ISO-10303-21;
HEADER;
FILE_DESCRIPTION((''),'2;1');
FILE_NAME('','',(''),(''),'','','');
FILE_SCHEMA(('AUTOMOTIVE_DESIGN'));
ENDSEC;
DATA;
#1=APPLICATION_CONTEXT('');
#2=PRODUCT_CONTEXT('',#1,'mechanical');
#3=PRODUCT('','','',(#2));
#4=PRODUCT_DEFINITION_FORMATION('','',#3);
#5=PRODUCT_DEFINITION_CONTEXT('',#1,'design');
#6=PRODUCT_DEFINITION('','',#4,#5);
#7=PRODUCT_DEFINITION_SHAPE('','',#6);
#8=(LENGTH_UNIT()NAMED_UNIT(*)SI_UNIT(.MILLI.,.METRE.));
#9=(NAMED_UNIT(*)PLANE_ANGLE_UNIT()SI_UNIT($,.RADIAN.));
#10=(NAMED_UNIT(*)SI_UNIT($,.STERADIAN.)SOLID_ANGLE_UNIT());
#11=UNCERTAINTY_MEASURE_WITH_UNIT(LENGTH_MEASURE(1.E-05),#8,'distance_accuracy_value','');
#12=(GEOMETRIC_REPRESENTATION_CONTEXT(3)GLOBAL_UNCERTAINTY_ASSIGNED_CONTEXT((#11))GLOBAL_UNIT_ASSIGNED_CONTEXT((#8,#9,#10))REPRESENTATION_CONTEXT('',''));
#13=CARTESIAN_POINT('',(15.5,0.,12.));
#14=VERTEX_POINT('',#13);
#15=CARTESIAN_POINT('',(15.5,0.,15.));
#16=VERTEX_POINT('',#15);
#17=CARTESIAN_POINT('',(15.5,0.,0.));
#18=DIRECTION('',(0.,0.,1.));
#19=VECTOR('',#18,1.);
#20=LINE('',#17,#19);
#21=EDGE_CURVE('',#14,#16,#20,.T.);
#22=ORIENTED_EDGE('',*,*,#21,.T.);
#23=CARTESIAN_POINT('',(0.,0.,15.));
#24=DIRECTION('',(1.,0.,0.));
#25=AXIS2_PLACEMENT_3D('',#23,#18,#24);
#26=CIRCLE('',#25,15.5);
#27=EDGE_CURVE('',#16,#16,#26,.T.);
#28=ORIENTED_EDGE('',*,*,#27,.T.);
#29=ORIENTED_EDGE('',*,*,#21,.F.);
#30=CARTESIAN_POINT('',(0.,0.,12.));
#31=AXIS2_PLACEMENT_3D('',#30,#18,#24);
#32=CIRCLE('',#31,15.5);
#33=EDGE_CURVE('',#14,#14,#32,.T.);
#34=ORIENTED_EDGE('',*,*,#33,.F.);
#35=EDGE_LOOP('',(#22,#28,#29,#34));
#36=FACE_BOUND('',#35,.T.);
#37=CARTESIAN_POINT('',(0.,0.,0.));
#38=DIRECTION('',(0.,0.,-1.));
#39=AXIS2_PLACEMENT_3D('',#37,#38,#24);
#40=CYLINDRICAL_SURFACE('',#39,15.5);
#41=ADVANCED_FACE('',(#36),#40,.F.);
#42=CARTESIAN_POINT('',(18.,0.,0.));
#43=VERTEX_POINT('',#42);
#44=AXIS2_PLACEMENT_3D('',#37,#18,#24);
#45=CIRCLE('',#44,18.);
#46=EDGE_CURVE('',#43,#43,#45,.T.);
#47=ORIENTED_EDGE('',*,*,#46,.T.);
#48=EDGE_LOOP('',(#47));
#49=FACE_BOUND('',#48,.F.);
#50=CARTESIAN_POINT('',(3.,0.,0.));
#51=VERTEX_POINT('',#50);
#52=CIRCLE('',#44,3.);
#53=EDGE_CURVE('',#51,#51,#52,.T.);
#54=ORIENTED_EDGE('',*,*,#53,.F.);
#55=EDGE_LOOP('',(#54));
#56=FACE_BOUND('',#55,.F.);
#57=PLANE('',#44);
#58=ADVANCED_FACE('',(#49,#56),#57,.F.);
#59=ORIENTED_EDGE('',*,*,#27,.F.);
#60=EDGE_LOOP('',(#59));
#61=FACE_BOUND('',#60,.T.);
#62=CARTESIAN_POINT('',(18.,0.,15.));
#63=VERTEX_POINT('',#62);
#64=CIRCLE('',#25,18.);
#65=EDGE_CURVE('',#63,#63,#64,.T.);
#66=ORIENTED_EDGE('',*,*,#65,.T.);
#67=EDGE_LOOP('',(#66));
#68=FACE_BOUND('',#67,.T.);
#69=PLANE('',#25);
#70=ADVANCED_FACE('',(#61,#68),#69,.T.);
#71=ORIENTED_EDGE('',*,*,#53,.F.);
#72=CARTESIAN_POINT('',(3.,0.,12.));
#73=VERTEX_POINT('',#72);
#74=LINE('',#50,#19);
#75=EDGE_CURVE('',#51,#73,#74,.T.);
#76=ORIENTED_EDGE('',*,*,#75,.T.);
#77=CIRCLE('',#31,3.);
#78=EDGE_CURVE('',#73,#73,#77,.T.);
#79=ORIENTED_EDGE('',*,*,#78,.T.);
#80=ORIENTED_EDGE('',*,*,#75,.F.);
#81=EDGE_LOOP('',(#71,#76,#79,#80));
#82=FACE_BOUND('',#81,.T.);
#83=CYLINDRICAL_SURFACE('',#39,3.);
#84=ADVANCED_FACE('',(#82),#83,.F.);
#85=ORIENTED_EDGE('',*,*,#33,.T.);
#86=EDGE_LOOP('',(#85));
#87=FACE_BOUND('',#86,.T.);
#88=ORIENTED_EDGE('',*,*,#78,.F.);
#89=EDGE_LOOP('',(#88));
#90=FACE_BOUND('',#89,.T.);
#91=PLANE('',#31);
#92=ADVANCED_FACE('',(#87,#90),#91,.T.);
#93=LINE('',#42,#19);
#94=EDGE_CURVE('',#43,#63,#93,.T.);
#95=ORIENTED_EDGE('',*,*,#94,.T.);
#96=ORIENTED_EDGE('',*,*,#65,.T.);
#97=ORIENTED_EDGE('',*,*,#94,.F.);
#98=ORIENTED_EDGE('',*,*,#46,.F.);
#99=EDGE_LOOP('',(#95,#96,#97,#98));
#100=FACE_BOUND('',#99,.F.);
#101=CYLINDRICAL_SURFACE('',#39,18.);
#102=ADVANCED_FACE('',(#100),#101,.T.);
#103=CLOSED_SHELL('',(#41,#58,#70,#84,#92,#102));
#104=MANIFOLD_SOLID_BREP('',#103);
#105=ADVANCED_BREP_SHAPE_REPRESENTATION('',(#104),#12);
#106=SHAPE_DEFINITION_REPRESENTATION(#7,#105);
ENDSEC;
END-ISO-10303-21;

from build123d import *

# Parameters (mm, degrees)
F0_R     = 15.5
F0_R_2   = 12.5
F0_R_3   = 3
F1_DEPTH = 12
F0_R_4   = 18
F2_DEPTH = 15


# Not quite as in the source:
# - a feature names something its author has since deleted; it is built from what else it names


with BuildPart() as f1:
    # F0 (on Top) → F1 (new body)
    with BuildSketch(Plane.XY):
        Circle(F0_R)
        Circle(F0_R_2, mode=Mode.SUBTRACT)
        Circle(F0_R_2)
        Circle(F0_R_3, mode=Mode.SUBTRACT)
    extrude(amount=F1_DEPTH)

    # F0 (on Top) → F2 (join)
    with BuildSketch(Plane.XY):
        Circle(F0_R_4)
        Circle(F0_R, mode=Mode.SUBTRACT)
    extrude(amount=F2_DEPTH)


solid = f1.part
